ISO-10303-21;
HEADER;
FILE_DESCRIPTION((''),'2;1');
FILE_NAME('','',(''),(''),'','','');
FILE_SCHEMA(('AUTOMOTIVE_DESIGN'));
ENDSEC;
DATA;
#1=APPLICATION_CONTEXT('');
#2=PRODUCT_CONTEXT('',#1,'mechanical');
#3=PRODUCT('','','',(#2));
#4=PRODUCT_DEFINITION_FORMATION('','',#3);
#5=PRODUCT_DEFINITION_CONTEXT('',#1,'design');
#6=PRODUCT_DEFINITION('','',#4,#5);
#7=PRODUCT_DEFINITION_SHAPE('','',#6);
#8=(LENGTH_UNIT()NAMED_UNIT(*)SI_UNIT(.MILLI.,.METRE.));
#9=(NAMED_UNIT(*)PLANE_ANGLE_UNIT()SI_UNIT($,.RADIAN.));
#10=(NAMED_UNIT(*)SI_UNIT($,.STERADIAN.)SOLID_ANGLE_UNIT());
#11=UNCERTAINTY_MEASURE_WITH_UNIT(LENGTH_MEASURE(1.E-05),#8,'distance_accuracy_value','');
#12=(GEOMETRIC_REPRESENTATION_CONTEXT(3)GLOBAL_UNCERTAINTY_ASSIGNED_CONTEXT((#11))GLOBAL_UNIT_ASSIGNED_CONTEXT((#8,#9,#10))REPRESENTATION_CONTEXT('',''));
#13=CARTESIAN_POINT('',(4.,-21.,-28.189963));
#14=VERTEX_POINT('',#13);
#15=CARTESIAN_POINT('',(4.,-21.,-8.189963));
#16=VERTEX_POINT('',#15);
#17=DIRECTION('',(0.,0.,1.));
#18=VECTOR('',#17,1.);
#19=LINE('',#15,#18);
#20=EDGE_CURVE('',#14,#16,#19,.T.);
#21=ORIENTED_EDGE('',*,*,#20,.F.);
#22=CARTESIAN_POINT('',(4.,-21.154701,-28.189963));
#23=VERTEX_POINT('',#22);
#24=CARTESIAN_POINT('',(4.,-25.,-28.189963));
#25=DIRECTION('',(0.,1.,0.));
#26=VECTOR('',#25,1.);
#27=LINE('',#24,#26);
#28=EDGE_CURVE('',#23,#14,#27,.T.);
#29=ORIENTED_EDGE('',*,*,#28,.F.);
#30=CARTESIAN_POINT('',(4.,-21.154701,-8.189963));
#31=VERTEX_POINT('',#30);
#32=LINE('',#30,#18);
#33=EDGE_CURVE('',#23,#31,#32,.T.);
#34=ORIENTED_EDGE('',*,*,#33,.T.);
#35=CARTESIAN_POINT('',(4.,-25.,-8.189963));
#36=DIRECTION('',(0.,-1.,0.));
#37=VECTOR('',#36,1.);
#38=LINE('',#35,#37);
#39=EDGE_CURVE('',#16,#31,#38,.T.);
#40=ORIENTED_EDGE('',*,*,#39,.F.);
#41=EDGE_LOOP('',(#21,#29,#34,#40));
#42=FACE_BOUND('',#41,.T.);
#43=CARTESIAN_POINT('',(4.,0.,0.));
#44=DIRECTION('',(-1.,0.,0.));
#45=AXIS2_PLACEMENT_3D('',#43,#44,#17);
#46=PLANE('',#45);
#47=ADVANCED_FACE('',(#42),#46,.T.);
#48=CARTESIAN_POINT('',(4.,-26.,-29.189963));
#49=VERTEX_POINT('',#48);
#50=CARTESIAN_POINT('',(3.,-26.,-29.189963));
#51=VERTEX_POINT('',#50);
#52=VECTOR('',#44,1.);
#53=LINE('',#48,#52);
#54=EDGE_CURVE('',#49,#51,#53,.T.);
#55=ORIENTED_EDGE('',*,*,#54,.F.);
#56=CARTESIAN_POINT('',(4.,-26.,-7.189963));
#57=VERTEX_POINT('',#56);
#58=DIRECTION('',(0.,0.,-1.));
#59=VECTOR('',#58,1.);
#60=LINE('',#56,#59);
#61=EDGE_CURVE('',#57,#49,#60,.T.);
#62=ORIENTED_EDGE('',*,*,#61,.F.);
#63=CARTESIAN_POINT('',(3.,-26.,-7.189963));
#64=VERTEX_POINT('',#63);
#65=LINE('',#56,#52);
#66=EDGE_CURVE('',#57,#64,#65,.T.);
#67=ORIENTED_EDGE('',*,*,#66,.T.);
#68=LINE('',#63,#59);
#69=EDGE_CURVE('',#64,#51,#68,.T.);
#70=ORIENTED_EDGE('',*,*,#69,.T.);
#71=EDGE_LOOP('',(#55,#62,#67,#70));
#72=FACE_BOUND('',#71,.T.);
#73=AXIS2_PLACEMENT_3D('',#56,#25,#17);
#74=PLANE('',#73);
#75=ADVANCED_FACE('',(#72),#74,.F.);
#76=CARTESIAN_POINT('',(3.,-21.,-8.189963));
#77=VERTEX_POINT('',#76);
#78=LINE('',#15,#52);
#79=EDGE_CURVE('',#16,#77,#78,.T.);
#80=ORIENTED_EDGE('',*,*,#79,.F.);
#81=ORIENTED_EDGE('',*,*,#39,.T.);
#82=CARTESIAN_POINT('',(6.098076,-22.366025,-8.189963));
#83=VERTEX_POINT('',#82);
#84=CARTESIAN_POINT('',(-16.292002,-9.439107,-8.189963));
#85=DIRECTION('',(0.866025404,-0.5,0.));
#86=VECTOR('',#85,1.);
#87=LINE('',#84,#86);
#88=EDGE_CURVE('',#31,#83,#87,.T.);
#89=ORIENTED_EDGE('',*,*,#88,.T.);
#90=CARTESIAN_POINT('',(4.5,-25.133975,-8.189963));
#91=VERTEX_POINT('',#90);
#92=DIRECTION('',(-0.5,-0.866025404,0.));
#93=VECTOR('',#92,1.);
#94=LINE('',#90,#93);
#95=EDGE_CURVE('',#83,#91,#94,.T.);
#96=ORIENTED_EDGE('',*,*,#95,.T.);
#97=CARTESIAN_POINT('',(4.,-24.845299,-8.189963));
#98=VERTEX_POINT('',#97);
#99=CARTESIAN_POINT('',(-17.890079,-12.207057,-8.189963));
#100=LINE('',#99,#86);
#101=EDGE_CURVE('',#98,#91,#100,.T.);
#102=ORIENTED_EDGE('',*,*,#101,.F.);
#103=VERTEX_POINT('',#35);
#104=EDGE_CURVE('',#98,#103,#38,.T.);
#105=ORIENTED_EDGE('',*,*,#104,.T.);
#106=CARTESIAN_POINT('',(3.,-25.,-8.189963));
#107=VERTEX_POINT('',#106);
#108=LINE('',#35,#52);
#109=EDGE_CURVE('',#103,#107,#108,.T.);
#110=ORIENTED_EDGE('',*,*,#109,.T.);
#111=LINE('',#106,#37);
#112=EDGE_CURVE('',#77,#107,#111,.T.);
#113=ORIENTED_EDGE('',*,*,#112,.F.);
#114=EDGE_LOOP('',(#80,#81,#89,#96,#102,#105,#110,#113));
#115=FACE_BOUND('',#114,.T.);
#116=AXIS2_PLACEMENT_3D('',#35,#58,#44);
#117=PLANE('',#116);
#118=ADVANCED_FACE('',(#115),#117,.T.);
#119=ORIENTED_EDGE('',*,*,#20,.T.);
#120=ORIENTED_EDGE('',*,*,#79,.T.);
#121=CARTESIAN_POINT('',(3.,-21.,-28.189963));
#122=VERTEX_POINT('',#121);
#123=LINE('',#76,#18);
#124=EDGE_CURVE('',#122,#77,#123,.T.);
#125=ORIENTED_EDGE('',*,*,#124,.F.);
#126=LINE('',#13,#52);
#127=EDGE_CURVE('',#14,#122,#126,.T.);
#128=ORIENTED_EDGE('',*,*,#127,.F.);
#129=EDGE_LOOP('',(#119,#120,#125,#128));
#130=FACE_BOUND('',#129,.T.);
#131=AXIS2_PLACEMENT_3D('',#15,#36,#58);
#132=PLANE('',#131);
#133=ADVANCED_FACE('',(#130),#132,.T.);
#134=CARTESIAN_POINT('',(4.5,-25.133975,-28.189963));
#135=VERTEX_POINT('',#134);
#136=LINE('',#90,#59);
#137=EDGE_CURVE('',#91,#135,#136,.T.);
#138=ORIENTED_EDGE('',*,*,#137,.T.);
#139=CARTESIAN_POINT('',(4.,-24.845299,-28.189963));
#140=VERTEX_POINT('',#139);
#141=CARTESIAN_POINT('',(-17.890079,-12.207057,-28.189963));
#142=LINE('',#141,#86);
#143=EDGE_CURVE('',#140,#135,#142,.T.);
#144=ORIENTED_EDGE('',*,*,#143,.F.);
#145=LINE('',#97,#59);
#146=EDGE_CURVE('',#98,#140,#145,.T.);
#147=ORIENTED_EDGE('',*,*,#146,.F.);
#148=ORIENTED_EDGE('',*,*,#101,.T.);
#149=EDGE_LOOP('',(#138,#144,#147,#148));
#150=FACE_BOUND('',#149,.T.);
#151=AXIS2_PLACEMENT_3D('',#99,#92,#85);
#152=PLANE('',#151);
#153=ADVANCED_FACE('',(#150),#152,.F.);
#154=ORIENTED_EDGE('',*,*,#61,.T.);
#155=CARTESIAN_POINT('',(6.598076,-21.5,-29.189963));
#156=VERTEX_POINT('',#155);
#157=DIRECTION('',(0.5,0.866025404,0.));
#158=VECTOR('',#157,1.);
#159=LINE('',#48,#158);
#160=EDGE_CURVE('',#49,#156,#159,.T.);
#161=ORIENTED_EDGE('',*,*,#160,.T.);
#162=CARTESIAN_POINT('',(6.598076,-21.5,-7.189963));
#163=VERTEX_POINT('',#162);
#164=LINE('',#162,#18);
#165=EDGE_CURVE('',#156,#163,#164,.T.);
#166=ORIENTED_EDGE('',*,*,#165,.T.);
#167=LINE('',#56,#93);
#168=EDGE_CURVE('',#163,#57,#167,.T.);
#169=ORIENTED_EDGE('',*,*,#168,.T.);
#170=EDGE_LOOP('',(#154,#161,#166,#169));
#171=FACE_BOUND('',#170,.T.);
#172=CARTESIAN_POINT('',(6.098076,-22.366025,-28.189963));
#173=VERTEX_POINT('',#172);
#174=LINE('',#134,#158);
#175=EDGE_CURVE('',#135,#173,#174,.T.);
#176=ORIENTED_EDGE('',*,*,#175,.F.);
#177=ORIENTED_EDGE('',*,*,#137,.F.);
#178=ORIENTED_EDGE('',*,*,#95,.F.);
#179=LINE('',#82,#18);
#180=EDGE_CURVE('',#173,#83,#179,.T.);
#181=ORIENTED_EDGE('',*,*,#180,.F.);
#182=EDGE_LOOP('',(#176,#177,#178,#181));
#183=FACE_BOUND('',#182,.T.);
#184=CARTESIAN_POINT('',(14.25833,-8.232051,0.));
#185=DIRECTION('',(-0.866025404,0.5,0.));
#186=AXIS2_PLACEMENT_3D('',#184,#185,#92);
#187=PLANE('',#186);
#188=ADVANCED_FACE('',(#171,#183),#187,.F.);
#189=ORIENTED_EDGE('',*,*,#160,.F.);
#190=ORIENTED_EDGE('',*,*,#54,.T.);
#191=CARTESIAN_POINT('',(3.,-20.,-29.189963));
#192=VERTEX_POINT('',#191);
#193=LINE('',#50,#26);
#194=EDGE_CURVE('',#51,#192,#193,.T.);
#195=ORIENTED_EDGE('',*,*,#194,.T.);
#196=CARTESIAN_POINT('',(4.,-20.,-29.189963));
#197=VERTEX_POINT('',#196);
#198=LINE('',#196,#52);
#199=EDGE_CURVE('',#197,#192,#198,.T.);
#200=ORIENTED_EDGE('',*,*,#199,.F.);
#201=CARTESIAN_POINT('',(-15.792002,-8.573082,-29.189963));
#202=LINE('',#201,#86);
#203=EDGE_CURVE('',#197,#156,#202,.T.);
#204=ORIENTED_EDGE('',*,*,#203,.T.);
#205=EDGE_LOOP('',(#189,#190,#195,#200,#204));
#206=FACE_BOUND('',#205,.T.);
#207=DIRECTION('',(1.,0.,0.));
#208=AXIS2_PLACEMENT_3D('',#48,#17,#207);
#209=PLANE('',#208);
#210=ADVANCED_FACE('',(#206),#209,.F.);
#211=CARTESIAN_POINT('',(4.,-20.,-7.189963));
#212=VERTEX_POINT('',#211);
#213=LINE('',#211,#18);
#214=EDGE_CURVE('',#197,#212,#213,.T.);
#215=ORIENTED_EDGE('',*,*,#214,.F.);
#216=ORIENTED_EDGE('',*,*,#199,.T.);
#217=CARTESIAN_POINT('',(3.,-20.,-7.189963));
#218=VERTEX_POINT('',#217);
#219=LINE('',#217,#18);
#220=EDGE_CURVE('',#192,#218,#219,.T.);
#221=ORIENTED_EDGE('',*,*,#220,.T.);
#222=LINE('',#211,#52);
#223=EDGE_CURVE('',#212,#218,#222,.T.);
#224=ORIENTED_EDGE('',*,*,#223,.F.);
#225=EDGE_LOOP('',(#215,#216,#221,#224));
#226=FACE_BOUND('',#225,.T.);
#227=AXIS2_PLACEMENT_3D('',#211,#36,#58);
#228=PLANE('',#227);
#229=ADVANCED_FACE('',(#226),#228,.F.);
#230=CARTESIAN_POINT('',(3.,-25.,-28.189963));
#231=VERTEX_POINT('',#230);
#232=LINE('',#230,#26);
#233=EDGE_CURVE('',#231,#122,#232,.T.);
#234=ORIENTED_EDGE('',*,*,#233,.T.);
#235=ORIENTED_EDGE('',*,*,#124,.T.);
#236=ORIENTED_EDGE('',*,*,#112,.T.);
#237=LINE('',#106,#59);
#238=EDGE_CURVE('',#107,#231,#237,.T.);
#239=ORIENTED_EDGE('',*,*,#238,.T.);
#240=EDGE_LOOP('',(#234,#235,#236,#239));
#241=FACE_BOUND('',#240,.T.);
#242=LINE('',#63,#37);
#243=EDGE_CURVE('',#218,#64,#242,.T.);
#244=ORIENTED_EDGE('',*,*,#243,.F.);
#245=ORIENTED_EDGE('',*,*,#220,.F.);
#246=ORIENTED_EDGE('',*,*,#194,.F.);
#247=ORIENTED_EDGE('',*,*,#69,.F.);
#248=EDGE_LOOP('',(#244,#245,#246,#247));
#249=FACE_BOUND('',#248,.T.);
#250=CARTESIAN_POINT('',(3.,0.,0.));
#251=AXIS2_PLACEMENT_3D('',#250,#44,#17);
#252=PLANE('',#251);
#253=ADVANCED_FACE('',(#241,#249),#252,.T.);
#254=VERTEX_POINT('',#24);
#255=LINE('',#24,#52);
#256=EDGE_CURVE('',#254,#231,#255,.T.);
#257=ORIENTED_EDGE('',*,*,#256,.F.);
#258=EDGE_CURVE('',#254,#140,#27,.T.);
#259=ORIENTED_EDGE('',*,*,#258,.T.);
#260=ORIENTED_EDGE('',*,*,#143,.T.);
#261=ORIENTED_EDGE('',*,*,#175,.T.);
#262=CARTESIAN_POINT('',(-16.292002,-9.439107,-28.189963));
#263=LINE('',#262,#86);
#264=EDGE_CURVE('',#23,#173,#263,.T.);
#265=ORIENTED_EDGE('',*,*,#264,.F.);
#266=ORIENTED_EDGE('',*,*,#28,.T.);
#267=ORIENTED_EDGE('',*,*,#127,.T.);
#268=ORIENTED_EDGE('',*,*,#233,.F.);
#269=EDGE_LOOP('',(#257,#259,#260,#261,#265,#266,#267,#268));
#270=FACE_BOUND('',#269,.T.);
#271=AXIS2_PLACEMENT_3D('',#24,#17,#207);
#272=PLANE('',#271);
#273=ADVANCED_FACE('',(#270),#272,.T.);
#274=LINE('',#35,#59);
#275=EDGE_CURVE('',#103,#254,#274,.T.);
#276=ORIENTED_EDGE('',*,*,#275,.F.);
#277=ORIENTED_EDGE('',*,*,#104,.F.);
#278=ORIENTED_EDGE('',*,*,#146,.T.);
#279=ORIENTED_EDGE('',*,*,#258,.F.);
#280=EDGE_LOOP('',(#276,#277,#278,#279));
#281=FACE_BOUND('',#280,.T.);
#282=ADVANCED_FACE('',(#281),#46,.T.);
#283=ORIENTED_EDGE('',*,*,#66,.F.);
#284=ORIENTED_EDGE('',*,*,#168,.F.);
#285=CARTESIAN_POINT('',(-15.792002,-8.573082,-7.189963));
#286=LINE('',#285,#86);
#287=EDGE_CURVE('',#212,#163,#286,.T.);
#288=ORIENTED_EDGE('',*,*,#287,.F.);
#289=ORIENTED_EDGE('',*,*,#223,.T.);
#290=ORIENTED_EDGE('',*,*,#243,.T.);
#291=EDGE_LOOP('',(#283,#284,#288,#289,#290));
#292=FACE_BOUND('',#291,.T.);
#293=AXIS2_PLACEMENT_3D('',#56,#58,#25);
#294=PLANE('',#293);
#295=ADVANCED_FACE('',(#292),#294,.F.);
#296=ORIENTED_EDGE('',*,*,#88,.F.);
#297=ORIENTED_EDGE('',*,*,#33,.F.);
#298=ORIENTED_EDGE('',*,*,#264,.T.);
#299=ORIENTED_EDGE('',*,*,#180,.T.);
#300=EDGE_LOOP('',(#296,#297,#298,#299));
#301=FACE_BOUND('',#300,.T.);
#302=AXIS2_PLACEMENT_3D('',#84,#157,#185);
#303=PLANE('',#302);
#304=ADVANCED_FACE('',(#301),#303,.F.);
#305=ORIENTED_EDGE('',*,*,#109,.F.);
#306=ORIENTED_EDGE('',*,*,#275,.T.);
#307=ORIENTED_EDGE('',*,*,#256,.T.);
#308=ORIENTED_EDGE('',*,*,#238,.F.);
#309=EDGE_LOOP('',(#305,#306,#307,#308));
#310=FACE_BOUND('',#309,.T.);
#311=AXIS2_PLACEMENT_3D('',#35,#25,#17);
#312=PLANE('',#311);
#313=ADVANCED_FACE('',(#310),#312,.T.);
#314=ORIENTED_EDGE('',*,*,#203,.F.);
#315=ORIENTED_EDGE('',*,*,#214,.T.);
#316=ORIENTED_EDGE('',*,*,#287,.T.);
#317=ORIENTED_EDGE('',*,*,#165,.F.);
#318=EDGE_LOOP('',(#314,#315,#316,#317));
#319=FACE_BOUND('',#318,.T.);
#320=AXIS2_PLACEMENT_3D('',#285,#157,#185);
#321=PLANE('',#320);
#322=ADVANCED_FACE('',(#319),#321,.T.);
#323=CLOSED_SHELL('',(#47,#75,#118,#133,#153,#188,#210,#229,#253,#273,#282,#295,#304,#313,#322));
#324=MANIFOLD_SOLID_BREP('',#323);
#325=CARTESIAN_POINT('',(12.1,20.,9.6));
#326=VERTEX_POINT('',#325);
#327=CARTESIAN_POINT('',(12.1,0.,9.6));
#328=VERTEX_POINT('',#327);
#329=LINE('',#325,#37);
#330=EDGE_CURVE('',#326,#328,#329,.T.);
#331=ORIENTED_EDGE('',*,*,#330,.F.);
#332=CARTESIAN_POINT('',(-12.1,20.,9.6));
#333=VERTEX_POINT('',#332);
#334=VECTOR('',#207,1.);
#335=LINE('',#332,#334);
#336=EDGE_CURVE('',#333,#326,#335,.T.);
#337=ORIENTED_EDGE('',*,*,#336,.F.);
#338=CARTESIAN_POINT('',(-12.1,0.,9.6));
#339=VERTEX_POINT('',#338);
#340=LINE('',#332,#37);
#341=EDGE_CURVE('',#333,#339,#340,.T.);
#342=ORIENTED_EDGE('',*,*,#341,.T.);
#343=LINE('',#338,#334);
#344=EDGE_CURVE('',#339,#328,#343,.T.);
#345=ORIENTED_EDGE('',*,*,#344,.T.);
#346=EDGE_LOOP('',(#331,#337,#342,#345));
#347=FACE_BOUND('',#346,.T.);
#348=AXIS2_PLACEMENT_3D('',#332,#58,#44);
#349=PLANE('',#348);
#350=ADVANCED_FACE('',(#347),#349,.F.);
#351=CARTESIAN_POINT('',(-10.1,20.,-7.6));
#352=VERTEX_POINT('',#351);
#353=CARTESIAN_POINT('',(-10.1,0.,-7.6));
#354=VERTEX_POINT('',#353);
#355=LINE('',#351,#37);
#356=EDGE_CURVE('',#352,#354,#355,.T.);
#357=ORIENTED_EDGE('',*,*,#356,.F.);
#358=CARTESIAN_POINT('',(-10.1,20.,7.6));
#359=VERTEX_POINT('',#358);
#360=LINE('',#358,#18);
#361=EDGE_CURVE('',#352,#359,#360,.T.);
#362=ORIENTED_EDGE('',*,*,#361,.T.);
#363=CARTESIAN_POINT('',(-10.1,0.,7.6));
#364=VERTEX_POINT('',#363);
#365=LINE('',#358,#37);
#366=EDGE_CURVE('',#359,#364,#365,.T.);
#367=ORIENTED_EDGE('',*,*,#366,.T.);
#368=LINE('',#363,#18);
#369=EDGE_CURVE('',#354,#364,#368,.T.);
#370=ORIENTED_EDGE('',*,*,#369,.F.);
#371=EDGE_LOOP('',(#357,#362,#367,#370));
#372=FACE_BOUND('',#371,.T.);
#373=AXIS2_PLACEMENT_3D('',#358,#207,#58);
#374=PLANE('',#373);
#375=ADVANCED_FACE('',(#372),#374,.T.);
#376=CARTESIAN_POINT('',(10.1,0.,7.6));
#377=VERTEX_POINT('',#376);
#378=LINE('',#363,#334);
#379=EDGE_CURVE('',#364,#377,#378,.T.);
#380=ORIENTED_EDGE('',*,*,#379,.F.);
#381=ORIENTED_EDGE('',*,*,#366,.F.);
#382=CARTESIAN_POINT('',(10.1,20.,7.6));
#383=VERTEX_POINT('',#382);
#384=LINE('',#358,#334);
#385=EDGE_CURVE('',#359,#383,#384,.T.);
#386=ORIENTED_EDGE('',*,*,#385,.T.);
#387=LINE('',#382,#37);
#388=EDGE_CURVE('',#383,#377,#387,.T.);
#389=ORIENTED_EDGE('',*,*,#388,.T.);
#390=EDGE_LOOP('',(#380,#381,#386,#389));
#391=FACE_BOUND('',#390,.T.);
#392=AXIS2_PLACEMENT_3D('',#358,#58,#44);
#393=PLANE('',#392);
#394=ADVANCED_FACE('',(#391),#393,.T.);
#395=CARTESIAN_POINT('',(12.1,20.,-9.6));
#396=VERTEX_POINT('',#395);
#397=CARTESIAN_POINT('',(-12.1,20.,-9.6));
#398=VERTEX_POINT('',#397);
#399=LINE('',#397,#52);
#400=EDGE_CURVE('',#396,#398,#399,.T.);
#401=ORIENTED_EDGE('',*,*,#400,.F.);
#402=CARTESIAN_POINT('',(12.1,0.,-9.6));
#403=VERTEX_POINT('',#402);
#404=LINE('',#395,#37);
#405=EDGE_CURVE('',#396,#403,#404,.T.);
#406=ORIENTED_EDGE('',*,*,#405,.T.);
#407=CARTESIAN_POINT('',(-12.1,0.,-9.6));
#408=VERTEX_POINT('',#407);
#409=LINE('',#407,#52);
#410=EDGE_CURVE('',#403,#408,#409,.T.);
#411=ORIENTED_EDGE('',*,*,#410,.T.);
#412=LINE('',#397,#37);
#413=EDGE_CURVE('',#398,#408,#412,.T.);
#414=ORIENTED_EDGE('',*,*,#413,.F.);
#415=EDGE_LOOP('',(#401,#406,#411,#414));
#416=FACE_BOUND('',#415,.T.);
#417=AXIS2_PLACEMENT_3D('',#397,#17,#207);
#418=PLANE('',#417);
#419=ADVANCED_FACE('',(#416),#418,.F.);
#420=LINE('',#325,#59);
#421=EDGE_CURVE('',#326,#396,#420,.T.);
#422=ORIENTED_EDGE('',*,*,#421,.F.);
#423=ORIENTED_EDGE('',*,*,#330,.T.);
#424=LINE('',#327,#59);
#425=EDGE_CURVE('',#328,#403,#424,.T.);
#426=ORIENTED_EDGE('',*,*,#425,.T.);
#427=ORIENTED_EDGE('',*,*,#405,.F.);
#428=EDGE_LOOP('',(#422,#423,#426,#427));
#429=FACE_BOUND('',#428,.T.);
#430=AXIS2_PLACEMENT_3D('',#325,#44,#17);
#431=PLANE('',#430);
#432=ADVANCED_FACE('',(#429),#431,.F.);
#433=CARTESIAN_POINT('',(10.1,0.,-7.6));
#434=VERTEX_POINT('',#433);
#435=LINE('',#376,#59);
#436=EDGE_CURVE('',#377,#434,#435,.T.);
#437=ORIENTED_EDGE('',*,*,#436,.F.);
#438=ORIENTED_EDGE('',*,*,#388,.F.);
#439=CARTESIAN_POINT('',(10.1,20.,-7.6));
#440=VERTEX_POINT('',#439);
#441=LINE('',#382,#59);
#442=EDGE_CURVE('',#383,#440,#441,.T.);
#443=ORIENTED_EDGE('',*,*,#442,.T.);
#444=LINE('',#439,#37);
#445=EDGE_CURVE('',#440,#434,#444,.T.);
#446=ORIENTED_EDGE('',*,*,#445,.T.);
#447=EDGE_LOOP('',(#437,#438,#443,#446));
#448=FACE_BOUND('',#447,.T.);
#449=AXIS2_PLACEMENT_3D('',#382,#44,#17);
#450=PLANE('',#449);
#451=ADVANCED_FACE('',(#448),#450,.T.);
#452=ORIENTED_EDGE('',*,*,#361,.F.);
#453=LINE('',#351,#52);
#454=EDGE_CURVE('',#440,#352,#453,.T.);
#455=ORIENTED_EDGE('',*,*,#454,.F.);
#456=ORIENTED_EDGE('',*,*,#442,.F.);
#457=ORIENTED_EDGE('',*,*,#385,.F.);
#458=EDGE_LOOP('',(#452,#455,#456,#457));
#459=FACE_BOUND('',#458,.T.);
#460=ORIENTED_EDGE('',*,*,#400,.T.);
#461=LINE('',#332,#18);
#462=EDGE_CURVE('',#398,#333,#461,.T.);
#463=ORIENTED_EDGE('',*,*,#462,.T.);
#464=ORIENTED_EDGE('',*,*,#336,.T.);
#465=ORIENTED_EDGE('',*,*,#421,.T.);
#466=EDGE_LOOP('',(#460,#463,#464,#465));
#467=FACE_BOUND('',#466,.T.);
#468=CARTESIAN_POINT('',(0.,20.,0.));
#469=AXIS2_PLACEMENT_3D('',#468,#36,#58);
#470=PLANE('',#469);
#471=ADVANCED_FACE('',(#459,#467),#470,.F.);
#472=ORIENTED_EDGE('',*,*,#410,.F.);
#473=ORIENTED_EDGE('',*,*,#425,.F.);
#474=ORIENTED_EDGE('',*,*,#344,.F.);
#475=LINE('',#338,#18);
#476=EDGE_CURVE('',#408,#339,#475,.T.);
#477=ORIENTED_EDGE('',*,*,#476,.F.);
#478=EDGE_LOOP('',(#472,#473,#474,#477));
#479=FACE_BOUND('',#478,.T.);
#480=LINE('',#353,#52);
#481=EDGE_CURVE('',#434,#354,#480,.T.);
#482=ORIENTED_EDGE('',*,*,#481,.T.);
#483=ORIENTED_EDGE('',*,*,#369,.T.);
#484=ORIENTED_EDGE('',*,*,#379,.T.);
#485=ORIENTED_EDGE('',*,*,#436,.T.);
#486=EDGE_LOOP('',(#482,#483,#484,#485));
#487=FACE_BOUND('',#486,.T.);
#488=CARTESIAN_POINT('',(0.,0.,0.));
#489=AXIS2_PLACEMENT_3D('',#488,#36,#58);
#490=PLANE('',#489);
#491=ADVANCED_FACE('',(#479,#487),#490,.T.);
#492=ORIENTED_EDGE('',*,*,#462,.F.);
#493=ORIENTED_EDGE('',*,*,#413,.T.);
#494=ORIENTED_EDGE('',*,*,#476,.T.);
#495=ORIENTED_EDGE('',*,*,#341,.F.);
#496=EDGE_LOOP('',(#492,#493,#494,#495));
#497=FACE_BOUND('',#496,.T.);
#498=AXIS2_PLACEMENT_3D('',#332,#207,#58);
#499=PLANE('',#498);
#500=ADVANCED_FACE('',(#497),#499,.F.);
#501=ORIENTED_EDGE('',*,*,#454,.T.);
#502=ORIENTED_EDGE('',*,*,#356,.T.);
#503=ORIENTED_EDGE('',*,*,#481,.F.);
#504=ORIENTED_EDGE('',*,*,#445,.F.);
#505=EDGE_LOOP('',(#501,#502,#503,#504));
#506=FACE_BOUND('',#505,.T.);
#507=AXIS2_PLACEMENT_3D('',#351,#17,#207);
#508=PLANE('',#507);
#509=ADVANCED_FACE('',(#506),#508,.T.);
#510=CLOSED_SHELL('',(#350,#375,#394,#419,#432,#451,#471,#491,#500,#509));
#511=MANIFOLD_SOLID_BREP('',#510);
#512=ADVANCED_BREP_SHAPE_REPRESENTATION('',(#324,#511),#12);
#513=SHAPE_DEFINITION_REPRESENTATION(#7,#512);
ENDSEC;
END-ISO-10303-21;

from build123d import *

# Parameters (mm, degrees)
SZKIC1_W                      = 24.2
SZKIC1_H                      = 19.2
SZKIC1_W_2                    = 20.2
SZKIC1_H_2                    = 15.2
DODANIE_WYCI_GNI_CIE1_DEPTH   = 20
SZKIC2_W                      = 22
SZKIC2_H                      = 6
SZKIC2_W_2                    = 20
SZKIC2_H_2                    = 4
DODANIE_WYCI_GNI_CIE2_DEPTH   = 1
DODANIE_WYCI_GNI_CIE3_START   = -29.189963439
DODANIE_WYCI_GNI_CIE3_DEPTH   = 22
DODANIE_WYCI_GNI_CIE3_2_DEPTH = 1
DODANIE_WYCI_GNI_CIE3_START_2 = -8.189963439
DODANIE_WYCI_GNI_CIE3_3_DEPTH = 1


# Read off the part's stored shape, not the designer's step: Dodanie-wyciągnięcie3
with BuildPart() as part:
    # Szkic1 → Dodanie-wyciągnięcie1 (new body)
    with BuildSketch(Plane(origin=(0, 0, 0), x_dir=(1, 0, 0), z_dir=(0, 1, 0))):
        Rectangle(SZKIC1_W, SZKIC1_H)
        Rectangle(SZKIC1_W_2, SZKIC1_H_2, mode=Mode.SUBTRACT)
    extrude(amount=DODANIE_WYCI_GNI_CIE1_DEPTH)


with BuildPart() as body_2:
    # Szkic2 → Dodanie-wyciągnięcie2 (new body)
    with BuildSketch(Plane(origin=(3, 0, 0), x_dir=(0, 0, -1), z_dir=(1, 0, 0))):
        with Locations((18.189963439, -23)):
            Rectangle(SZKIC2_W, SZKIC2_H)
        with Locations((18.189963439, -23)):
            Rectangle(SZKIC2_W_2, SZKIC2_H_2, mode=Mode.SUBTRACT)
    extrude(amount=DODANIE_WYCI_GNI_CIE2_DEPTH)

    # Dodanie-wyciągnięcie3 outline → Dodanie-wyciągnięcie3 (add)
    with BuildSketch(Plane.XY.offset(DODANIE_WYCI_GNI_CIE3_START)):
        Polygon((4.5, -25.133974596), (4, -24.845299462), (4, -26), align=None)
        Polygon((4, -20), (4, -21.154700538), (6.098076211, -22.366025404), (6.598076211, -21.5), align=None)
    extrude(amount=DODANIE_WYCI_GNI_CIE3_DEPTH)

    # Dodanie-wyci_gni_cie3 2 outline → Dodanie-wyci_gni_cie3 2 (add)
    with BuildSketch(Plane.XY.offset(DODANIE_WYCI_GNI_CIE3_START)):
        Polygon((4, -21.154700538), (4, -24.845299462), (4.5, -25.133974596), (6.098076211, -22.366025404), align=None)
    extrude(amount=DODANIE_WYCI_GNI_CIE3_2_DEPTH)

    # Dodanie-wyci_gni_cie3 3 outline → Dodanie-wyci_gni_cie3 3 (add)
    with BuildSketch(Plane.XY.offset(DODANIE_WYCI_GNI_CIE3_START_2)):
        Polygon((4, -21.154700538), (4, -24.845299462), (4.5, -25.133974596), (6.098076211, -22.366025404), align=None)
    extrude(amount=DODANIE_WYCI_GNI_CIE3_3_DEPTH)


solid = Compound([part.part, body_2.part])
